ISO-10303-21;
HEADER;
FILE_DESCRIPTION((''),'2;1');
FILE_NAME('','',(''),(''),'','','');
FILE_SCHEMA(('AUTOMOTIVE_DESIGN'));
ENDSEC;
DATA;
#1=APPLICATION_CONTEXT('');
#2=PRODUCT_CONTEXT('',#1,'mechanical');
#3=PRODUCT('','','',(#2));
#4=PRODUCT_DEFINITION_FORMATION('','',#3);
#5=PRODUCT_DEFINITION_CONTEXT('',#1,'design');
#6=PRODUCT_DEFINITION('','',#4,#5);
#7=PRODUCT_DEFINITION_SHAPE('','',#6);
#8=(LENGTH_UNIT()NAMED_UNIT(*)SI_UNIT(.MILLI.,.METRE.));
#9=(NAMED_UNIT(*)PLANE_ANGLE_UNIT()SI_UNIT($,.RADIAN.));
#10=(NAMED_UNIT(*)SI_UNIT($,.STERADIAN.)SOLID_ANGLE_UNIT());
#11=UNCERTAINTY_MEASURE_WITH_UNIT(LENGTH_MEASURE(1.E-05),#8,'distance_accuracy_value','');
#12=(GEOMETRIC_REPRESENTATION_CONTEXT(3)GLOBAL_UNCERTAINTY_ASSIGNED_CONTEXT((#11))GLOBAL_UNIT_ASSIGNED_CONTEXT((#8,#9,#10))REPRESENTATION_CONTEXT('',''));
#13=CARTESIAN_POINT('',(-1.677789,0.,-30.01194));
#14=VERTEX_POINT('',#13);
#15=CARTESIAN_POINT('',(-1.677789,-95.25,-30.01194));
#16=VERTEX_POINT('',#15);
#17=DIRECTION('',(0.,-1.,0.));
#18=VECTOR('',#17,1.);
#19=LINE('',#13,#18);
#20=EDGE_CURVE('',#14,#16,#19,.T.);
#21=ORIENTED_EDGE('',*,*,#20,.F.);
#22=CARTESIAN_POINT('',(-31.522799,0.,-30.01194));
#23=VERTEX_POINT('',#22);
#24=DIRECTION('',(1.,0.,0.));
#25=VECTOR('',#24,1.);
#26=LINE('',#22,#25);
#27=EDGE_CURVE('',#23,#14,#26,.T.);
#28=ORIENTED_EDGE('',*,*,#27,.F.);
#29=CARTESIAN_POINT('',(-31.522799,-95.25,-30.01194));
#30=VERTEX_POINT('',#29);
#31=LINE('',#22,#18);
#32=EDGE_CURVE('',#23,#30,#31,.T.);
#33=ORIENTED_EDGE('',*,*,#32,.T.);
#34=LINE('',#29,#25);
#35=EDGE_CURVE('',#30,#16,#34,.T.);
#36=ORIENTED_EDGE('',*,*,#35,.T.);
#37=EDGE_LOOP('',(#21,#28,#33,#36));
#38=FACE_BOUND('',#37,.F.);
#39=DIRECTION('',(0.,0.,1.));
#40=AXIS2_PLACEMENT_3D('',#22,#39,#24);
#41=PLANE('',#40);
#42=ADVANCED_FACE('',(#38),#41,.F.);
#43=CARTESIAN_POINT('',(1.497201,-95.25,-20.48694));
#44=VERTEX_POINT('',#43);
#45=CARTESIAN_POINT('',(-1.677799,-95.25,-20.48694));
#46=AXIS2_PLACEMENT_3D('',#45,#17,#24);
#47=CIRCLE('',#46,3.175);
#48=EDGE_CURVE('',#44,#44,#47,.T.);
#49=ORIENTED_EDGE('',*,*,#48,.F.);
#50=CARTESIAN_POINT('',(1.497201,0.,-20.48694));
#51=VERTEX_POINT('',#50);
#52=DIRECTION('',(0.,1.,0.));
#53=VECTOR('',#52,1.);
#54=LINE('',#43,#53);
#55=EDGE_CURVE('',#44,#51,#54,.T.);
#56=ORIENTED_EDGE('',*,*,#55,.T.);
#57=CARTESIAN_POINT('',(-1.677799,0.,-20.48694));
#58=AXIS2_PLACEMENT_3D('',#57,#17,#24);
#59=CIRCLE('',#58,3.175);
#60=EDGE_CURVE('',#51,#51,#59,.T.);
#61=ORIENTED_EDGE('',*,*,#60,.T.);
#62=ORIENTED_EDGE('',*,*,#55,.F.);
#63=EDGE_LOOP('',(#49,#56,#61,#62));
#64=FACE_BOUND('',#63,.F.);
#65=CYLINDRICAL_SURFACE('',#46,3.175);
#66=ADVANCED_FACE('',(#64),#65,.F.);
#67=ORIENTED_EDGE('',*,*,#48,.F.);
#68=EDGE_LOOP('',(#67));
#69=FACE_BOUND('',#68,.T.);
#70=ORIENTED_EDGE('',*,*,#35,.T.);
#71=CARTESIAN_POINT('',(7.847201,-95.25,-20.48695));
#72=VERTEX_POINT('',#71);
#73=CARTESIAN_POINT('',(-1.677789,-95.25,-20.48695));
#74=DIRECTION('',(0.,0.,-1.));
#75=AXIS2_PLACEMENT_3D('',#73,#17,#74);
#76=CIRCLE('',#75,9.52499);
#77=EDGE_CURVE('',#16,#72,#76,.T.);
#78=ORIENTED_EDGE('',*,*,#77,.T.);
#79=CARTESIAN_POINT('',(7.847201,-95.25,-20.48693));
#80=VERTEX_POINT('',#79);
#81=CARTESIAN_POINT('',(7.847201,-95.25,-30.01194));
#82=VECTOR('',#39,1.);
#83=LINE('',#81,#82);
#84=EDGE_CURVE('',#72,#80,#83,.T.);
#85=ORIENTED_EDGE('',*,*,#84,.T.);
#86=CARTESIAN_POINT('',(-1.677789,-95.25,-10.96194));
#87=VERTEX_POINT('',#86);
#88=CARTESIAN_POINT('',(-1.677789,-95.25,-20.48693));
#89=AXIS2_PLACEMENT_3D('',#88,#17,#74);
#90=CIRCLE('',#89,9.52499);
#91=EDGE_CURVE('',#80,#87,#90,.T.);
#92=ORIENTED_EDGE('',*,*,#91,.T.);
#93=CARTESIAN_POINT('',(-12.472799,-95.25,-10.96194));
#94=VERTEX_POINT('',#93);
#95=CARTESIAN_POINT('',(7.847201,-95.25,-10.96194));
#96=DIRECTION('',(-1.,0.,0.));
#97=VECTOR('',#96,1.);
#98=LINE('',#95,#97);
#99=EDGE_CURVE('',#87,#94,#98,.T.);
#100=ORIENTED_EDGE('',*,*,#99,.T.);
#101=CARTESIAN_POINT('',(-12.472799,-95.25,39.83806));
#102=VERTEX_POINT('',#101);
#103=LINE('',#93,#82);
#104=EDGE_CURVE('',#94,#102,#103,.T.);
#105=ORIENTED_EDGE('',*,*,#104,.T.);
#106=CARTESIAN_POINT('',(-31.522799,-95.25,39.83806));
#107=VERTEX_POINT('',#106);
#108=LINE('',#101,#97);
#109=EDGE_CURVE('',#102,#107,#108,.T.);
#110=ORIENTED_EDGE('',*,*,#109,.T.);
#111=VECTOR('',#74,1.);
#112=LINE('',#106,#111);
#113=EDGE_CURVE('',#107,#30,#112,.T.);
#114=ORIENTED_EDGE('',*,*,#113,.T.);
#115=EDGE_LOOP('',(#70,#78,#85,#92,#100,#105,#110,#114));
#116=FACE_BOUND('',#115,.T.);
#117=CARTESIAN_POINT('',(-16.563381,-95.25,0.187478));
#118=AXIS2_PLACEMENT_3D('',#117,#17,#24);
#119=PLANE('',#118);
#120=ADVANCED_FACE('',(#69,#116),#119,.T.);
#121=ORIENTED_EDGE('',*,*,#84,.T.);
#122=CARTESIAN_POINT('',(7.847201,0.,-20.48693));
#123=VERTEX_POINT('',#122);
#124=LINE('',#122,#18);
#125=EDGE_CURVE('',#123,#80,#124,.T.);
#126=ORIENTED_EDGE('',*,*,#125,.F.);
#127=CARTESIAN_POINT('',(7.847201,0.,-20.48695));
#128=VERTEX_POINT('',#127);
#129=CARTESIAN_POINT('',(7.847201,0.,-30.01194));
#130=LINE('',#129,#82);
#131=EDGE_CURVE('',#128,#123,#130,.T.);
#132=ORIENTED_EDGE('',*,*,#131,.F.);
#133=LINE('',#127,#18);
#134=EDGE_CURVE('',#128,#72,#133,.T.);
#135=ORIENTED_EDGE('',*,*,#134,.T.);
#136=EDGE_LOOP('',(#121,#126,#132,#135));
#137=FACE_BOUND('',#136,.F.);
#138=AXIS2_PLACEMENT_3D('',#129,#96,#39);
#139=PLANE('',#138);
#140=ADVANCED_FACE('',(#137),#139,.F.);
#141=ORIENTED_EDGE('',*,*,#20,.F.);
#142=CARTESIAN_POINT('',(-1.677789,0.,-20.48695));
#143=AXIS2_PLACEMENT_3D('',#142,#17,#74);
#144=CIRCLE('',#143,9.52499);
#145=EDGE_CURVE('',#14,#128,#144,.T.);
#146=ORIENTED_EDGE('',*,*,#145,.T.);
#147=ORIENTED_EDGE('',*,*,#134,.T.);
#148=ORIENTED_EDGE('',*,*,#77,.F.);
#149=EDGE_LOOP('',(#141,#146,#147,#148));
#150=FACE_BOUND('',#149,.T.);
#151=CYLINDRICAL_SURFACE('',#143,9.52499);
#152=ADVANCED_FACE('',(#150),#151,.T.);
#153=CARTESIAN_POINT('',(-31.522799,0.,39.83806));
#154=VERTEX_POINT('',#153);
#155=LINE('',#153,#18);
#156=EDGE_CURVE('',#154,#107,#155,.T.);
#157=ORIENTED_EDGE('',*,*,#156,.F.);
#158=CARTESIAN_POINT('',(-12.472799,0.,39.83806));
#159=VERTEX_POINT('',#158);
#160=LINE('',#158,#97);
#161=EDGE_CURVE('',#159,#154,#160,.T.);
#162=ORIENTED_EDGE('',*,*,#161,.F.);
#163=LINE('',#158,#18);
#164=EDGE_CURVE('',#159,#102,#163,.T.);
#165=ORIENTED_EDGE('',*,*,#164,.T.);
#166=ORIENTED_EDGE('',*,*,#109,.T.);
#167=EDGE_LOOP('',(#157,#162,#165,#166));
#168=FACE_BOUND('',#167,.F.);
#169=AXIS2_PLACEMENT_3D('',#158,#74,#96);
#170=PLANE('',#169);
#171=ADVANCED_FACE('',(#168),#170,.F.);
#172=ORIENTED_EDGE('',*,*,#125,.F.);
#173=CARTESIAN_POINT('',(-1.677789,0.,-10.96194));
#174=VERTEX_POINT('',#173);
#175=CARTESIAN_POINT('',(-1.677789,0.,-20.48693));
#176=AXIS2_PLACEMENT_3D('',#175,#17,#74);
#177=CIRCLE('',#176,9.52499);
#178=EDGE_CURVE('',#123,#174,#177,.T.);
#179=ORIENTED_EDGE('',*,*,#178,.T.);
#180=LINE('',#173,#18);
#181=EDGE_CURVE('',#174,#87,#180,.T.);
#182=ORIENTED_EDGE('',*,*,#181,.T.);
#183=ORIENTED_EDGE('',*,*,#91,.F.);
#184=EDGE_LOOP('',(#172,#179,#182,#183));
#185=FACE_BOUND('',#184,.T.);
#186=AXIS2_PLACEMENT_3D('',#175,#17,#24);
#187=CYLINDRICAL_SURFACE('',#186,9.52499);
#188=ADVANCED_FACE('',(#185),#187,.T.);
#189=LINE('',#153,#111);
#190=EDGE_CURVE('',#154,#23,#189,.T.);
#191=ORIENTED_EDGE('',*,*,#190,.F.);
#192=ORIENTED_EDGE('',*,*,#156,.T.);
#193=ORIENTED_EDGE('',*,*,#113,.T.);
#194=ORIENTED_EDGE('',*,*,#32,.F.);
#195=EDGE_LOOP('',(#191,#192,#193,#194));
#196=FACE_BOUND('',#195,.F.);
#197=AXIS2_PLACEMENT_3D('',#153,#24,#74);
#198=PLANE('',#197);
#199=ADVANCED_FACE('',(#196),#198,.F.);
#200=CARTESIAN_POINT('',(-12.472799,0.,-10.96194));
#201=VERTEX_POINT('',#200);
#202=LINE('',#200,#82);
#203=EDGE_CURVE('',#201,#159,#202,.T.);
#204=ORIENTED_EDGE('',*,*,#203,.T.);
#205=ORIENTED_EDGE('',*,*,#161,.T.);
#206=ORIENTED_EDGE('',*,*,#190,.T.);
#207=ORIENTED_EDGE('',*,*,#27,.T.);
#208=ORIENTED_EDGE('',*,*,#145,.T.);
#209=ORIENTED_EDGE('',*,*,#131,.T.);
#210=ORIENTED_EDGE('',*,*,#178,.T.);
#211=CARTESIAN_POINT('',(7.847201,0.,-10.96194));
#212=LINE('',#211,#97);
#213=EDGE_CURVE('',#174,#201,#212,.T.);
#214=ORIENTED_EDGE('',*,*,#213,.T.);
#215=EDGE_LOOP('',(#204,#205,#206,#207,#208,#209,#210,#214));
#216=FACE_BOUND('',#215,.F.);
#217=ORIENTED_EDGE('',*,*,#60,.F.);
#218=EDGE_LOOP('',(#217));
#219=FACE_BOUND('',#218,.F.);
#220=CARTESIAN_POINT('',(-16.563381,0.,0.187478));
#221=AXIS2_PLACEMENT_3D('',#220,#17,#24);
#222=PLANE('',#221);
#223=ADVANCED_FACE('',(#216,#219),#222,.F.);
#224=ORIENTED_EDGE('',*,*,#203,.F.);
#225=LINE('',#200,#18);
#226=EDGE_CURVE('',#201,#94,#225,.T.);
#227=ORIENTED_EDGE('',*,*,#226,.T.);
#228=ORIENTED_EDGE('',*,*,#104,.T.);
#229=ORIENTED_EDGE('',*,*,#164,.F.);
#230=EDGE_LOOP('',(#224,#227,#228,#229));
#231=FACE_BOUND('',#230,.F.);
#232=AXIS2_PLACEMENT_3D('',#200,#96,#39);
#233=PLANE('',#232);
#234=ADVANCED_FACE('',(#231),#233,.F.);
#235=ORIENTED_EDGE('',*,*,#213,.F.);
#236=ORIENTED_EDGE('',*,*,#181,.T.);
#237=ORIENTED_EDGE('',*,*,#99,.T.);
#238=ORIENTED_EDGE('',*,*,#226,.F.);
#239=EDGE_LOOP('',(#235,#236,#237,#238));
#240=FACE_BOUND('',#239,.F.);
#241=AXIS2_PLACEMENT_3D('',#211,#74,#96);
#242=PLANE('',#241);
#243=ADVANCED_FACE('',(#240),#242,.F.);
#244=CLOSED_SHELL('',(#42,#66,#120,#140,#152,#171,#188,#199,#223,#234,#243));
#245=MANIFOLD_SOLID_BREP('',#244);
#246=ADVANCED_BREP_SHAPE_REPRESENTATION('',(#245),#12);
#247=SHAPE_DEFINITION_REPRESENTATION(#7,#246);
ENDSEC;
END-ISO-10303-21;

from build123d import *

# Parameters (mm, degrees)
F1_DEPTH = 95.25
F2_R     = 9.52499
F3_R     = 3.175
F4_DEPTH = 95.251


# Not quite as in the source:
# - a fillet or chamfer is up to 0.001 mm smaller than in the source, because OpenCascade refuses the exact size
# - a feature names something its author has since deleted; it is built from what else it names


with BuildPart() as f1:
    # F0 (on Front) → F1 (new body)
    with BuildSketch(Plane.XZ):
        Polygon((-12.472799319, 39.8380596402), (-31.522799319, 39.8380596402), (-31.522799319, -30.0119403598), (7.847200681, -30.0119403598), (7.847200681, -10.9619403598), (-12.472799319, -10.9619403598), align=None)
    extrude(amount=F1_DEPTH)

    # F2 (radius 9.525 in the source; OpenCascade refuses exactly that, so slightly less here)
    f2_edges = [f1.edges().sort_by_distance(p)[0] for p in [
        (7.847201, -47.625, -10.96194),
        (7.847201, -47.625, -30.01194),
    ]]
    fillet(f2_edges, radius=F2_R)

    # F3 (on face) → F4 (cut, through all)
    with BuildSketch(Plane.XZ.offset(95.25)):
        with Locations((-1.677799319, -20.4869403598)):
            Circle(F3_R)
    extrude(amount=-F4_DEPTH, mode=Mode.SUBTRACT)


solid = f1.part
